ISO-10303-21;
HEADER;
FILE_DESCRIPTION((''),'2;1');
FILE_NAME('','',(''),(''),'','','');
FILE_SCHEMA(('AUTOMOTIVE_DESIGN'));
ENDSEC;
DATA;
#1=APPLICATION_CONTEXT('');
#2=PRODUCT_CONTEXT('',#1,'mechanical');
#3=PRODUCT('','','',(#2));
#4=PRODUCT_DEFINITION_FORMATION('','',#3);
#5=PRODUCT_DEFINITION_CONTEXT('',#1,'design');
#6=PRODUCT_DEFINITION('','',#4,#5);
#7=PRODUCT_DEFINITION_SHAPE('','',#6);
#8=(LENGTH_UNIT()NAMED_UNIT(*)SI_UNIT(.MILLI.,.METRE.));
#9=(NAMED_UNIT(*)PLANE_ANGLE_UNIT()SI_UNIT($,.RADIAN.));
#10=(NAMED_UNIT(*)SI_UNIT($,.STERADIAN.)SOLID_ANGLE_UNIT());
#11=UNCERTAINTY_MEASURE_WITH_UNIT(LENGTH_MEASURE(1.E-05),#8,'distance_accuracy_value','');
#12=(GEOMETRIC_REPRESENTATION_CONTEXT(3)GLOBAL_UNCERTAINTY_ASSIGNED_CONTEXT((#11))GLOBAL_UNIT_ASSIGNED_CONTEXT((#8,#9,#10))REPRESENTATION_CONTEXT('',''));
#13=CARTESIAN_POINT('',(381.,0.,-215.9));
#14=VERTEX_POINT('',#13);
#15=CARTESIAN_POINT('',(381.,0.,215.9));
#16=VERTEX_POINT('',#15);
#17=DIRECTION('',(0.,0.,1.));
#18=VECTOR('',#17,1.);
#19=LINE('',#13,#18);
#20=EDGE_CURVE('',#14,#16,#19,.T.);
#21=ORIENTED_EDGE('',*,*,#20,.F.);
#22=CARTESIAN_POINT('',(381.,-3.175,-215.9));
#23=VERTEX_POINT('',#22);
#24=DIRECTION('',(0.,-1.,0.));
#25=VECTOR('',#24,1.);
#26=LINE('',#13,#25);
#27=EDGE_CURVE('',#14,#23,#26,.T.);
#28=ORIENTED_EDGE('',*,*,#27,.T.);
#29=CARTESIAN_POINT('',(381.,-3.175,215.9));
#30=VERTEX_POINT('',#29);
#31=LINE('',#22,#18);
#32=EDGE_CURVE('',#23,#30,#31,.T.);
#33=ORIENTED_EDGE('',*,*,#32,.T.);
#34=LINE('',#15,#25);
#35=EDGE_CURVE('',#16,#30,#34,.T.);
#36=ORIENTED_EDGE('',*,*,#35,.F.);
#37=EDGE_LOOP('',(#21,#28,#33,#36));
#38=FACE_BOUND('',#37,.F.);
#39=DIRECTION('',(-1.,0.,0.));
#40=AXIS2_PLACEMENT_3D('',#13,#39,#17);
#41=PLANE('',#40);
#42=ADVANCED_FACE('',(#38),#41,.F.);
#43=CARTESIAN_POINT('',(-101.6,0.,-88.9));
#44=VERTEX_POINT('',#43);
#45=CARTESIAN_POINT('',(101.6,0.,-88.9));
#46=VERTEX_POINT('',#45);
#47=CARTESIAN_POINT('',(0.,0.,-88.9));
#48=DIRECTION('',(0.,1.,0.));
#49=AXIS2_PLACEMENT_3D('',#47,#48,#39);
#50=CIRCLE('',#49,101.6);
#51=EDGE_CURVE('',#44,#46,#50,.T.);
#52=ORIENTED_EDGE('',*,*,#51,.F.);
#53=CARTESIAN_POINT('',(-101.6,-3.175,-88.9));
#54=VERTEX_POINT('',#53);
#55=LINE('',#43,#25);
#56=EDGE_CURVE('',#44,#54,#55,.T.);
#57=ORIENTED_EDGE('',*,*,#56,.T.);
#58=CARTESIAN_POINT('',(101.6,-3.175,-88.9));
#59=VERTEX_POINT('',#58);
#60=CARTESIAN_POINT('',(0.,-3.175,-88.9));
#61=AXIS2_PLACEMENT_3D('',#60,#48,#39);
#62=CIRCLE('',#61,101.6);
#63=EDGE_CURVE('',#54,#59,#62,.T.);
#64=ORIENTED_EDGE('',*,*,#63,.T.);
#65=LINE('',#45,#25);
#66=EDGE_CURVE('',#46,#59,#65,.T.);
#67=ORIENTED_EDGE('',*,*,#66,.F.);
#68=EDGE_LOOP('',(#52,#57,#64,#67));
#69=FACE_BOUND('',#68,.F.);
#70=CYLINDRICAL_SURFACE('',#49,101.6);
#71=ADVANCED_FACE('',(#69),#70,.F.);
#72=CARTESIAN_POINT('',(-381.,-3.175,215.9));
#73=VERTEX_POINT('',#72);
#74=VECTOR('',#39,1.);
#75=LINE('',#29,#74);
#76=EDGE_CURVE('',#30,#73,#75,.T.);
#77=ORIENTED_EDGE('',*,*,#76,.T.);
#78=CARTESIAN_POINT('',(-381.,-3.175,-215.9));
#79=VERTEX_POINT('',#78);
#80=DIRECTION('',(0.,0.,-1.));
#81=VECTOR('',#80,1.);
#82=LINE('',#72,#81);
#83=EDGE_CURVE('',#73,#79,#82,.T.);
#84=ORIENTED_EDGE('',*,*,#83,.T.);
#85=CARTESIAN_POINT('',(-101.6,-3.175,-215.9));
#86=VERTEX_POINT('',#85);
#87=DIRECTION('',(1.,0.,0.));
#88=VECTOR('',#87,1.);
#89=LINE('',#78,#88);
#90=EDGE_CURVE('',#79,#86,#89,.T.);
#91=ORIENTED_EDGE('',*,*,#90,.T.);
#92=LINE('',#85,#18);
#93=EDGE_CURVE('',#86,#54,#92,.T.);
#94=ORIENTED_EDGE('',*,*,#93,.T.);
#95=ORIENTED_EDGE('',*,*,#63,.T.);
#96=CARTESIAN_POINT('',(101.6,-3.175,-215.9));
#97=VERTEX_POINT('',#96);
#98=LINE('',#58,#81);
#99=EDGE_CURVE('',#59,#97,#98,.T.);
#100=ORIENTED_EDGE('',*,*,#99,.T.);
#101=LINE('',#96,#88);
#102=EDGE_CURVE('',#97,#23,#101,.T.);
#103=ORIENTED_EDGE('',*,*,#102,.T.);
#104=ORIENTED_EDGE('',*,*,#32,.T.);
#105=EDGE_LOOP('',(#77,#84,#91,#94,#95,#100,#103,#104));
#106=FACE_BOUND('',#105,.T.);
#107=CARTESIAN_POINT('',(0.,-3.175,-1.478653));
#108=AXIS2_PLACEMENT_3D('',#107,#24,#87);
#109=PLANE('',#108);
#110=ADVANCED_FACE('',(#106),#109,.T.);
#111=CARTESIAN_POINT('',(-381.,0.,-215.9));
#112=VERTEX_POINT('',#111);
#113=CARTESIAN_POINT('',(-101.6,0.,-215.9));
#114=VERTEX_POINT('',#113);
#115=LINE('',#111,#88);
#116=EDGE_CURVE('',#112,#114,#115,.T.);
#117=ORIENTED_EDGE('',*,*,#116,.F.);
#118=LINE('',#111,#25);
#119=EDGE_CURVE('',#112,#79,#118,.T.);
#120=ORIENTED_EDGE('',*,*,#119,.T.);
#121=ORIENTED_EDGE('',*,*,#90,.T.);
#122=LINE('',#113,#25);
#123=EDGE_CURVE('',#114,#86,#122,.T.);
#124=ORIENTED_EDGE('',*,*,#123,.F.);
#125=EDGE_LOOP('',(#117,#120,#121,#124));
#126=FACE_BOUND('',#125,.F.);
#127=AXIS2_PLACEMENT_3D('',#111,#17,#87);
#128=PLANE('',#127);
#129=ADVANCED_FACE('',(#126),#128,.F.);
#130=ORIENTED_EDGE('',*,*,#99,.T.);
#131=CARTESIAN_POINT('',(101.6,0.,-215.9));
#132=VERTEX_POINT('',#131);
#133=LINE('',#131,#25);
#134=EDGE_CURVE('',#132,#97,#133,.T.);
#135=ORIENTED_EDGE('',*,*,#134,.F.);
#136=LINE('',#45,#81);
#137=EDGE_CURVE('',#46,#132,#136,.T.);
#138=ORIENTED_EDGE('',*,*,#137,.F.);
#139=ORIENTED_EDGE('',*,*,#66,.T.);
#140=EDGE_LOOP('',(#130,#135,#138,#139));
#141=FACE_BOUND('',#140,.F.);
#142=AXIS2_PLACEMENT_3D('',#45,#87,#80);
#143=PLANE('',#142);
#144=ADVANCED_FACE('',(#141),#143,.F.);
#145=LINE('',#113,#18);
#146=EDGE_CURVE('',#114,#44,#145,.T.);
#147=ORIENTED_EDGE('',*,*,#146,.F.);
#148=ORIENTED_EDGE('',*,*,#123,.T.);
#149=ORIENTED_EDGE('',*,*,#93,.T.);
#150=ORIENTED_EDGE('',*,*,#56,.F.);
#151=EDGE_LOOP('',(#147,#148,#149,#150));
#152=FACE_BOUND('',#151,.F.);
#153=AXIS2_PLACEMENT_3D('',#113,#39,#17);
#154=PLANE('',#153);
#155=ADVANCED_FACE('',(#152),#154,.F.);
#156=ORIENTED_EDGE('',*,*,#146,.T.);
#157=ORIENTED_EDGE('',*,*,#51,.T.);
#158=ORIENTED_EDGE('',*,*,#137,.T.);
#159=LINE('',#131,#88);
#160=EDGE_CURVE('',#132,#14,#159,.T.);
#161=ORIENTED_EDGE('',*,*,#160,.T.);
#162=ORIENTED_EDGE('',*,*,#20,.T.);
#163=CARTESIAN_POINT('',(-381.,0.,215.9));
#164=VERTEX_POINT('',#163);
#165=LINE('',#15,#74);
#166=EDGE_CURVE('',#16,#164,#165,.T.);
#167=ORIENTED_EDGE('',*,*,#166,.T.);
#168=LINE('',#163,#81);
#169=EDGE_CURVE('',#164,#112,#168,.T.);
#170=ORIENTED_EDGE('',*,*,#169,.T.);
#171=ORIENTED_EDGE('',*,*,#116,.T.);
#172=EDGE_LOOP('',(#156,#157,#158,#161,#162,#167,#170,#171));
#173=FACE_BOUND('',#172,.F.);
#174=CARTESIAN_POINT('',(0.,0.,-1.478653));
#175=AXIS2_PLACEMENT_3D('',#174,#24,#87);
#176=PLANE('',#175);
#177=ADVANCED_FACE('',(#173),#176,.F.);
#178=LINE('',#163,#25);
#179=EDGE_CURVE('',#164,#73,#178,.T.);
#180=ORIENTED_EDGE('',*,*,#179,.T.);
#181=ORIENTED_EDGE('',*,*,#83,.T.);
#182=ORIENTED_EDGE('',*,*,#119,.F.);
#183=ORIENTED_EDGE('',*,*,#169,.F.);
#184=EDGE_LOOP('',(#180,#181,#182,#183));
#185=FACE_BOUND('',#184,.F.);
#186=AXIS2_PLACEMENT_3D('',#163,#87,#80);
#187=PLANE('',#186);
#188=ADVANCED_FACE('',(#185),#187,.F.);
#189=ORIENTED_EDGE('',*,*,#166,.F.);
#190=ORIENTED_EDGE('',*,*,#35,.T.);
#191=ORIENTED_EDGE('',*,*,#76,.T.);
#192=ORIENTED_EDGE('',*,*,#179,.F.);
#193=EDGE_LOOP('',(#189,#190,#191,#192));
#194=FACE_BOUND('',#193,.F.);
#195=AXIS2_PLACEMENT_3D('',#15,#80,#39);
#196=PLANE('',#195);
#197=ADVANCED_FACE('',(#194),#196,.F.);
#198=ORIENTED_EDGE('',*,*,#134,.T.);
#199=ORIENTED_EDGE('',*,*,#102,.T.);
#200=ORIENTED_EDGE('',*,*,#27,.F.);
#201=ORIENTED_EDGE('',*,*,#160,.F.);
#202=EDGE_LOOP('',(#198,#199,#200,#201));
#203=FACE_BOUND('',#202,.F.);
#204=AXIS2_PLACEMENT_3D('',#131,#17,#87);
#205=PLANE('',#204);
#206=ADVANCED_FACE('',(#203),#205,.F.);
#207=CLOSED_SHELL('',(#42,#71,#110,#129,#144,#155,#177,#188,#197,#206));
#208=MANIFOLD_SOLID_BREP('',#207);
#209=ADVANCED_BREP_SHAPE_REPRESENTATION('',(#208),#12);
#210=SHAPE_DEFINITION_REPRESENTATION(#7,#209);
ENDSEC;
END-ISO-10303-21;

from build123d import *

# Parameters (mm, degrees)
F1_DEPTH = 3.175


# Not quite as in the source:
# - a length typed as a fraction of an inch, garbled in the dataset ("3 / 203.2 mm" for 3/8 in), is restored


with BuildPart() as f1:
    # F0 (on Front) → F1 (new body)
    with BuildSketch(Plane.XZ):
        with BuildLine():
            Line((381, -215.9), (381, 215.9))
            Line((381, 215.9), (-381, 215.9))
            Line((-381, 215.9), (-381, -215.9))
            Line((-381, -215.9), (-101.6, -215.9))
            Line((-101.6, -215.9), (-101.6, -88.9))
            ThreePointArc((-101.6, -88.9), (0, 12.7), (101.6, -88.9))
            Line((101.6, -88.9), (101.6, -215.9))
            Line((101.6, -215.9), (381, -215.9))
        make_face()
    extrude(amount=F1_DEPTH)


solid = f1.part
